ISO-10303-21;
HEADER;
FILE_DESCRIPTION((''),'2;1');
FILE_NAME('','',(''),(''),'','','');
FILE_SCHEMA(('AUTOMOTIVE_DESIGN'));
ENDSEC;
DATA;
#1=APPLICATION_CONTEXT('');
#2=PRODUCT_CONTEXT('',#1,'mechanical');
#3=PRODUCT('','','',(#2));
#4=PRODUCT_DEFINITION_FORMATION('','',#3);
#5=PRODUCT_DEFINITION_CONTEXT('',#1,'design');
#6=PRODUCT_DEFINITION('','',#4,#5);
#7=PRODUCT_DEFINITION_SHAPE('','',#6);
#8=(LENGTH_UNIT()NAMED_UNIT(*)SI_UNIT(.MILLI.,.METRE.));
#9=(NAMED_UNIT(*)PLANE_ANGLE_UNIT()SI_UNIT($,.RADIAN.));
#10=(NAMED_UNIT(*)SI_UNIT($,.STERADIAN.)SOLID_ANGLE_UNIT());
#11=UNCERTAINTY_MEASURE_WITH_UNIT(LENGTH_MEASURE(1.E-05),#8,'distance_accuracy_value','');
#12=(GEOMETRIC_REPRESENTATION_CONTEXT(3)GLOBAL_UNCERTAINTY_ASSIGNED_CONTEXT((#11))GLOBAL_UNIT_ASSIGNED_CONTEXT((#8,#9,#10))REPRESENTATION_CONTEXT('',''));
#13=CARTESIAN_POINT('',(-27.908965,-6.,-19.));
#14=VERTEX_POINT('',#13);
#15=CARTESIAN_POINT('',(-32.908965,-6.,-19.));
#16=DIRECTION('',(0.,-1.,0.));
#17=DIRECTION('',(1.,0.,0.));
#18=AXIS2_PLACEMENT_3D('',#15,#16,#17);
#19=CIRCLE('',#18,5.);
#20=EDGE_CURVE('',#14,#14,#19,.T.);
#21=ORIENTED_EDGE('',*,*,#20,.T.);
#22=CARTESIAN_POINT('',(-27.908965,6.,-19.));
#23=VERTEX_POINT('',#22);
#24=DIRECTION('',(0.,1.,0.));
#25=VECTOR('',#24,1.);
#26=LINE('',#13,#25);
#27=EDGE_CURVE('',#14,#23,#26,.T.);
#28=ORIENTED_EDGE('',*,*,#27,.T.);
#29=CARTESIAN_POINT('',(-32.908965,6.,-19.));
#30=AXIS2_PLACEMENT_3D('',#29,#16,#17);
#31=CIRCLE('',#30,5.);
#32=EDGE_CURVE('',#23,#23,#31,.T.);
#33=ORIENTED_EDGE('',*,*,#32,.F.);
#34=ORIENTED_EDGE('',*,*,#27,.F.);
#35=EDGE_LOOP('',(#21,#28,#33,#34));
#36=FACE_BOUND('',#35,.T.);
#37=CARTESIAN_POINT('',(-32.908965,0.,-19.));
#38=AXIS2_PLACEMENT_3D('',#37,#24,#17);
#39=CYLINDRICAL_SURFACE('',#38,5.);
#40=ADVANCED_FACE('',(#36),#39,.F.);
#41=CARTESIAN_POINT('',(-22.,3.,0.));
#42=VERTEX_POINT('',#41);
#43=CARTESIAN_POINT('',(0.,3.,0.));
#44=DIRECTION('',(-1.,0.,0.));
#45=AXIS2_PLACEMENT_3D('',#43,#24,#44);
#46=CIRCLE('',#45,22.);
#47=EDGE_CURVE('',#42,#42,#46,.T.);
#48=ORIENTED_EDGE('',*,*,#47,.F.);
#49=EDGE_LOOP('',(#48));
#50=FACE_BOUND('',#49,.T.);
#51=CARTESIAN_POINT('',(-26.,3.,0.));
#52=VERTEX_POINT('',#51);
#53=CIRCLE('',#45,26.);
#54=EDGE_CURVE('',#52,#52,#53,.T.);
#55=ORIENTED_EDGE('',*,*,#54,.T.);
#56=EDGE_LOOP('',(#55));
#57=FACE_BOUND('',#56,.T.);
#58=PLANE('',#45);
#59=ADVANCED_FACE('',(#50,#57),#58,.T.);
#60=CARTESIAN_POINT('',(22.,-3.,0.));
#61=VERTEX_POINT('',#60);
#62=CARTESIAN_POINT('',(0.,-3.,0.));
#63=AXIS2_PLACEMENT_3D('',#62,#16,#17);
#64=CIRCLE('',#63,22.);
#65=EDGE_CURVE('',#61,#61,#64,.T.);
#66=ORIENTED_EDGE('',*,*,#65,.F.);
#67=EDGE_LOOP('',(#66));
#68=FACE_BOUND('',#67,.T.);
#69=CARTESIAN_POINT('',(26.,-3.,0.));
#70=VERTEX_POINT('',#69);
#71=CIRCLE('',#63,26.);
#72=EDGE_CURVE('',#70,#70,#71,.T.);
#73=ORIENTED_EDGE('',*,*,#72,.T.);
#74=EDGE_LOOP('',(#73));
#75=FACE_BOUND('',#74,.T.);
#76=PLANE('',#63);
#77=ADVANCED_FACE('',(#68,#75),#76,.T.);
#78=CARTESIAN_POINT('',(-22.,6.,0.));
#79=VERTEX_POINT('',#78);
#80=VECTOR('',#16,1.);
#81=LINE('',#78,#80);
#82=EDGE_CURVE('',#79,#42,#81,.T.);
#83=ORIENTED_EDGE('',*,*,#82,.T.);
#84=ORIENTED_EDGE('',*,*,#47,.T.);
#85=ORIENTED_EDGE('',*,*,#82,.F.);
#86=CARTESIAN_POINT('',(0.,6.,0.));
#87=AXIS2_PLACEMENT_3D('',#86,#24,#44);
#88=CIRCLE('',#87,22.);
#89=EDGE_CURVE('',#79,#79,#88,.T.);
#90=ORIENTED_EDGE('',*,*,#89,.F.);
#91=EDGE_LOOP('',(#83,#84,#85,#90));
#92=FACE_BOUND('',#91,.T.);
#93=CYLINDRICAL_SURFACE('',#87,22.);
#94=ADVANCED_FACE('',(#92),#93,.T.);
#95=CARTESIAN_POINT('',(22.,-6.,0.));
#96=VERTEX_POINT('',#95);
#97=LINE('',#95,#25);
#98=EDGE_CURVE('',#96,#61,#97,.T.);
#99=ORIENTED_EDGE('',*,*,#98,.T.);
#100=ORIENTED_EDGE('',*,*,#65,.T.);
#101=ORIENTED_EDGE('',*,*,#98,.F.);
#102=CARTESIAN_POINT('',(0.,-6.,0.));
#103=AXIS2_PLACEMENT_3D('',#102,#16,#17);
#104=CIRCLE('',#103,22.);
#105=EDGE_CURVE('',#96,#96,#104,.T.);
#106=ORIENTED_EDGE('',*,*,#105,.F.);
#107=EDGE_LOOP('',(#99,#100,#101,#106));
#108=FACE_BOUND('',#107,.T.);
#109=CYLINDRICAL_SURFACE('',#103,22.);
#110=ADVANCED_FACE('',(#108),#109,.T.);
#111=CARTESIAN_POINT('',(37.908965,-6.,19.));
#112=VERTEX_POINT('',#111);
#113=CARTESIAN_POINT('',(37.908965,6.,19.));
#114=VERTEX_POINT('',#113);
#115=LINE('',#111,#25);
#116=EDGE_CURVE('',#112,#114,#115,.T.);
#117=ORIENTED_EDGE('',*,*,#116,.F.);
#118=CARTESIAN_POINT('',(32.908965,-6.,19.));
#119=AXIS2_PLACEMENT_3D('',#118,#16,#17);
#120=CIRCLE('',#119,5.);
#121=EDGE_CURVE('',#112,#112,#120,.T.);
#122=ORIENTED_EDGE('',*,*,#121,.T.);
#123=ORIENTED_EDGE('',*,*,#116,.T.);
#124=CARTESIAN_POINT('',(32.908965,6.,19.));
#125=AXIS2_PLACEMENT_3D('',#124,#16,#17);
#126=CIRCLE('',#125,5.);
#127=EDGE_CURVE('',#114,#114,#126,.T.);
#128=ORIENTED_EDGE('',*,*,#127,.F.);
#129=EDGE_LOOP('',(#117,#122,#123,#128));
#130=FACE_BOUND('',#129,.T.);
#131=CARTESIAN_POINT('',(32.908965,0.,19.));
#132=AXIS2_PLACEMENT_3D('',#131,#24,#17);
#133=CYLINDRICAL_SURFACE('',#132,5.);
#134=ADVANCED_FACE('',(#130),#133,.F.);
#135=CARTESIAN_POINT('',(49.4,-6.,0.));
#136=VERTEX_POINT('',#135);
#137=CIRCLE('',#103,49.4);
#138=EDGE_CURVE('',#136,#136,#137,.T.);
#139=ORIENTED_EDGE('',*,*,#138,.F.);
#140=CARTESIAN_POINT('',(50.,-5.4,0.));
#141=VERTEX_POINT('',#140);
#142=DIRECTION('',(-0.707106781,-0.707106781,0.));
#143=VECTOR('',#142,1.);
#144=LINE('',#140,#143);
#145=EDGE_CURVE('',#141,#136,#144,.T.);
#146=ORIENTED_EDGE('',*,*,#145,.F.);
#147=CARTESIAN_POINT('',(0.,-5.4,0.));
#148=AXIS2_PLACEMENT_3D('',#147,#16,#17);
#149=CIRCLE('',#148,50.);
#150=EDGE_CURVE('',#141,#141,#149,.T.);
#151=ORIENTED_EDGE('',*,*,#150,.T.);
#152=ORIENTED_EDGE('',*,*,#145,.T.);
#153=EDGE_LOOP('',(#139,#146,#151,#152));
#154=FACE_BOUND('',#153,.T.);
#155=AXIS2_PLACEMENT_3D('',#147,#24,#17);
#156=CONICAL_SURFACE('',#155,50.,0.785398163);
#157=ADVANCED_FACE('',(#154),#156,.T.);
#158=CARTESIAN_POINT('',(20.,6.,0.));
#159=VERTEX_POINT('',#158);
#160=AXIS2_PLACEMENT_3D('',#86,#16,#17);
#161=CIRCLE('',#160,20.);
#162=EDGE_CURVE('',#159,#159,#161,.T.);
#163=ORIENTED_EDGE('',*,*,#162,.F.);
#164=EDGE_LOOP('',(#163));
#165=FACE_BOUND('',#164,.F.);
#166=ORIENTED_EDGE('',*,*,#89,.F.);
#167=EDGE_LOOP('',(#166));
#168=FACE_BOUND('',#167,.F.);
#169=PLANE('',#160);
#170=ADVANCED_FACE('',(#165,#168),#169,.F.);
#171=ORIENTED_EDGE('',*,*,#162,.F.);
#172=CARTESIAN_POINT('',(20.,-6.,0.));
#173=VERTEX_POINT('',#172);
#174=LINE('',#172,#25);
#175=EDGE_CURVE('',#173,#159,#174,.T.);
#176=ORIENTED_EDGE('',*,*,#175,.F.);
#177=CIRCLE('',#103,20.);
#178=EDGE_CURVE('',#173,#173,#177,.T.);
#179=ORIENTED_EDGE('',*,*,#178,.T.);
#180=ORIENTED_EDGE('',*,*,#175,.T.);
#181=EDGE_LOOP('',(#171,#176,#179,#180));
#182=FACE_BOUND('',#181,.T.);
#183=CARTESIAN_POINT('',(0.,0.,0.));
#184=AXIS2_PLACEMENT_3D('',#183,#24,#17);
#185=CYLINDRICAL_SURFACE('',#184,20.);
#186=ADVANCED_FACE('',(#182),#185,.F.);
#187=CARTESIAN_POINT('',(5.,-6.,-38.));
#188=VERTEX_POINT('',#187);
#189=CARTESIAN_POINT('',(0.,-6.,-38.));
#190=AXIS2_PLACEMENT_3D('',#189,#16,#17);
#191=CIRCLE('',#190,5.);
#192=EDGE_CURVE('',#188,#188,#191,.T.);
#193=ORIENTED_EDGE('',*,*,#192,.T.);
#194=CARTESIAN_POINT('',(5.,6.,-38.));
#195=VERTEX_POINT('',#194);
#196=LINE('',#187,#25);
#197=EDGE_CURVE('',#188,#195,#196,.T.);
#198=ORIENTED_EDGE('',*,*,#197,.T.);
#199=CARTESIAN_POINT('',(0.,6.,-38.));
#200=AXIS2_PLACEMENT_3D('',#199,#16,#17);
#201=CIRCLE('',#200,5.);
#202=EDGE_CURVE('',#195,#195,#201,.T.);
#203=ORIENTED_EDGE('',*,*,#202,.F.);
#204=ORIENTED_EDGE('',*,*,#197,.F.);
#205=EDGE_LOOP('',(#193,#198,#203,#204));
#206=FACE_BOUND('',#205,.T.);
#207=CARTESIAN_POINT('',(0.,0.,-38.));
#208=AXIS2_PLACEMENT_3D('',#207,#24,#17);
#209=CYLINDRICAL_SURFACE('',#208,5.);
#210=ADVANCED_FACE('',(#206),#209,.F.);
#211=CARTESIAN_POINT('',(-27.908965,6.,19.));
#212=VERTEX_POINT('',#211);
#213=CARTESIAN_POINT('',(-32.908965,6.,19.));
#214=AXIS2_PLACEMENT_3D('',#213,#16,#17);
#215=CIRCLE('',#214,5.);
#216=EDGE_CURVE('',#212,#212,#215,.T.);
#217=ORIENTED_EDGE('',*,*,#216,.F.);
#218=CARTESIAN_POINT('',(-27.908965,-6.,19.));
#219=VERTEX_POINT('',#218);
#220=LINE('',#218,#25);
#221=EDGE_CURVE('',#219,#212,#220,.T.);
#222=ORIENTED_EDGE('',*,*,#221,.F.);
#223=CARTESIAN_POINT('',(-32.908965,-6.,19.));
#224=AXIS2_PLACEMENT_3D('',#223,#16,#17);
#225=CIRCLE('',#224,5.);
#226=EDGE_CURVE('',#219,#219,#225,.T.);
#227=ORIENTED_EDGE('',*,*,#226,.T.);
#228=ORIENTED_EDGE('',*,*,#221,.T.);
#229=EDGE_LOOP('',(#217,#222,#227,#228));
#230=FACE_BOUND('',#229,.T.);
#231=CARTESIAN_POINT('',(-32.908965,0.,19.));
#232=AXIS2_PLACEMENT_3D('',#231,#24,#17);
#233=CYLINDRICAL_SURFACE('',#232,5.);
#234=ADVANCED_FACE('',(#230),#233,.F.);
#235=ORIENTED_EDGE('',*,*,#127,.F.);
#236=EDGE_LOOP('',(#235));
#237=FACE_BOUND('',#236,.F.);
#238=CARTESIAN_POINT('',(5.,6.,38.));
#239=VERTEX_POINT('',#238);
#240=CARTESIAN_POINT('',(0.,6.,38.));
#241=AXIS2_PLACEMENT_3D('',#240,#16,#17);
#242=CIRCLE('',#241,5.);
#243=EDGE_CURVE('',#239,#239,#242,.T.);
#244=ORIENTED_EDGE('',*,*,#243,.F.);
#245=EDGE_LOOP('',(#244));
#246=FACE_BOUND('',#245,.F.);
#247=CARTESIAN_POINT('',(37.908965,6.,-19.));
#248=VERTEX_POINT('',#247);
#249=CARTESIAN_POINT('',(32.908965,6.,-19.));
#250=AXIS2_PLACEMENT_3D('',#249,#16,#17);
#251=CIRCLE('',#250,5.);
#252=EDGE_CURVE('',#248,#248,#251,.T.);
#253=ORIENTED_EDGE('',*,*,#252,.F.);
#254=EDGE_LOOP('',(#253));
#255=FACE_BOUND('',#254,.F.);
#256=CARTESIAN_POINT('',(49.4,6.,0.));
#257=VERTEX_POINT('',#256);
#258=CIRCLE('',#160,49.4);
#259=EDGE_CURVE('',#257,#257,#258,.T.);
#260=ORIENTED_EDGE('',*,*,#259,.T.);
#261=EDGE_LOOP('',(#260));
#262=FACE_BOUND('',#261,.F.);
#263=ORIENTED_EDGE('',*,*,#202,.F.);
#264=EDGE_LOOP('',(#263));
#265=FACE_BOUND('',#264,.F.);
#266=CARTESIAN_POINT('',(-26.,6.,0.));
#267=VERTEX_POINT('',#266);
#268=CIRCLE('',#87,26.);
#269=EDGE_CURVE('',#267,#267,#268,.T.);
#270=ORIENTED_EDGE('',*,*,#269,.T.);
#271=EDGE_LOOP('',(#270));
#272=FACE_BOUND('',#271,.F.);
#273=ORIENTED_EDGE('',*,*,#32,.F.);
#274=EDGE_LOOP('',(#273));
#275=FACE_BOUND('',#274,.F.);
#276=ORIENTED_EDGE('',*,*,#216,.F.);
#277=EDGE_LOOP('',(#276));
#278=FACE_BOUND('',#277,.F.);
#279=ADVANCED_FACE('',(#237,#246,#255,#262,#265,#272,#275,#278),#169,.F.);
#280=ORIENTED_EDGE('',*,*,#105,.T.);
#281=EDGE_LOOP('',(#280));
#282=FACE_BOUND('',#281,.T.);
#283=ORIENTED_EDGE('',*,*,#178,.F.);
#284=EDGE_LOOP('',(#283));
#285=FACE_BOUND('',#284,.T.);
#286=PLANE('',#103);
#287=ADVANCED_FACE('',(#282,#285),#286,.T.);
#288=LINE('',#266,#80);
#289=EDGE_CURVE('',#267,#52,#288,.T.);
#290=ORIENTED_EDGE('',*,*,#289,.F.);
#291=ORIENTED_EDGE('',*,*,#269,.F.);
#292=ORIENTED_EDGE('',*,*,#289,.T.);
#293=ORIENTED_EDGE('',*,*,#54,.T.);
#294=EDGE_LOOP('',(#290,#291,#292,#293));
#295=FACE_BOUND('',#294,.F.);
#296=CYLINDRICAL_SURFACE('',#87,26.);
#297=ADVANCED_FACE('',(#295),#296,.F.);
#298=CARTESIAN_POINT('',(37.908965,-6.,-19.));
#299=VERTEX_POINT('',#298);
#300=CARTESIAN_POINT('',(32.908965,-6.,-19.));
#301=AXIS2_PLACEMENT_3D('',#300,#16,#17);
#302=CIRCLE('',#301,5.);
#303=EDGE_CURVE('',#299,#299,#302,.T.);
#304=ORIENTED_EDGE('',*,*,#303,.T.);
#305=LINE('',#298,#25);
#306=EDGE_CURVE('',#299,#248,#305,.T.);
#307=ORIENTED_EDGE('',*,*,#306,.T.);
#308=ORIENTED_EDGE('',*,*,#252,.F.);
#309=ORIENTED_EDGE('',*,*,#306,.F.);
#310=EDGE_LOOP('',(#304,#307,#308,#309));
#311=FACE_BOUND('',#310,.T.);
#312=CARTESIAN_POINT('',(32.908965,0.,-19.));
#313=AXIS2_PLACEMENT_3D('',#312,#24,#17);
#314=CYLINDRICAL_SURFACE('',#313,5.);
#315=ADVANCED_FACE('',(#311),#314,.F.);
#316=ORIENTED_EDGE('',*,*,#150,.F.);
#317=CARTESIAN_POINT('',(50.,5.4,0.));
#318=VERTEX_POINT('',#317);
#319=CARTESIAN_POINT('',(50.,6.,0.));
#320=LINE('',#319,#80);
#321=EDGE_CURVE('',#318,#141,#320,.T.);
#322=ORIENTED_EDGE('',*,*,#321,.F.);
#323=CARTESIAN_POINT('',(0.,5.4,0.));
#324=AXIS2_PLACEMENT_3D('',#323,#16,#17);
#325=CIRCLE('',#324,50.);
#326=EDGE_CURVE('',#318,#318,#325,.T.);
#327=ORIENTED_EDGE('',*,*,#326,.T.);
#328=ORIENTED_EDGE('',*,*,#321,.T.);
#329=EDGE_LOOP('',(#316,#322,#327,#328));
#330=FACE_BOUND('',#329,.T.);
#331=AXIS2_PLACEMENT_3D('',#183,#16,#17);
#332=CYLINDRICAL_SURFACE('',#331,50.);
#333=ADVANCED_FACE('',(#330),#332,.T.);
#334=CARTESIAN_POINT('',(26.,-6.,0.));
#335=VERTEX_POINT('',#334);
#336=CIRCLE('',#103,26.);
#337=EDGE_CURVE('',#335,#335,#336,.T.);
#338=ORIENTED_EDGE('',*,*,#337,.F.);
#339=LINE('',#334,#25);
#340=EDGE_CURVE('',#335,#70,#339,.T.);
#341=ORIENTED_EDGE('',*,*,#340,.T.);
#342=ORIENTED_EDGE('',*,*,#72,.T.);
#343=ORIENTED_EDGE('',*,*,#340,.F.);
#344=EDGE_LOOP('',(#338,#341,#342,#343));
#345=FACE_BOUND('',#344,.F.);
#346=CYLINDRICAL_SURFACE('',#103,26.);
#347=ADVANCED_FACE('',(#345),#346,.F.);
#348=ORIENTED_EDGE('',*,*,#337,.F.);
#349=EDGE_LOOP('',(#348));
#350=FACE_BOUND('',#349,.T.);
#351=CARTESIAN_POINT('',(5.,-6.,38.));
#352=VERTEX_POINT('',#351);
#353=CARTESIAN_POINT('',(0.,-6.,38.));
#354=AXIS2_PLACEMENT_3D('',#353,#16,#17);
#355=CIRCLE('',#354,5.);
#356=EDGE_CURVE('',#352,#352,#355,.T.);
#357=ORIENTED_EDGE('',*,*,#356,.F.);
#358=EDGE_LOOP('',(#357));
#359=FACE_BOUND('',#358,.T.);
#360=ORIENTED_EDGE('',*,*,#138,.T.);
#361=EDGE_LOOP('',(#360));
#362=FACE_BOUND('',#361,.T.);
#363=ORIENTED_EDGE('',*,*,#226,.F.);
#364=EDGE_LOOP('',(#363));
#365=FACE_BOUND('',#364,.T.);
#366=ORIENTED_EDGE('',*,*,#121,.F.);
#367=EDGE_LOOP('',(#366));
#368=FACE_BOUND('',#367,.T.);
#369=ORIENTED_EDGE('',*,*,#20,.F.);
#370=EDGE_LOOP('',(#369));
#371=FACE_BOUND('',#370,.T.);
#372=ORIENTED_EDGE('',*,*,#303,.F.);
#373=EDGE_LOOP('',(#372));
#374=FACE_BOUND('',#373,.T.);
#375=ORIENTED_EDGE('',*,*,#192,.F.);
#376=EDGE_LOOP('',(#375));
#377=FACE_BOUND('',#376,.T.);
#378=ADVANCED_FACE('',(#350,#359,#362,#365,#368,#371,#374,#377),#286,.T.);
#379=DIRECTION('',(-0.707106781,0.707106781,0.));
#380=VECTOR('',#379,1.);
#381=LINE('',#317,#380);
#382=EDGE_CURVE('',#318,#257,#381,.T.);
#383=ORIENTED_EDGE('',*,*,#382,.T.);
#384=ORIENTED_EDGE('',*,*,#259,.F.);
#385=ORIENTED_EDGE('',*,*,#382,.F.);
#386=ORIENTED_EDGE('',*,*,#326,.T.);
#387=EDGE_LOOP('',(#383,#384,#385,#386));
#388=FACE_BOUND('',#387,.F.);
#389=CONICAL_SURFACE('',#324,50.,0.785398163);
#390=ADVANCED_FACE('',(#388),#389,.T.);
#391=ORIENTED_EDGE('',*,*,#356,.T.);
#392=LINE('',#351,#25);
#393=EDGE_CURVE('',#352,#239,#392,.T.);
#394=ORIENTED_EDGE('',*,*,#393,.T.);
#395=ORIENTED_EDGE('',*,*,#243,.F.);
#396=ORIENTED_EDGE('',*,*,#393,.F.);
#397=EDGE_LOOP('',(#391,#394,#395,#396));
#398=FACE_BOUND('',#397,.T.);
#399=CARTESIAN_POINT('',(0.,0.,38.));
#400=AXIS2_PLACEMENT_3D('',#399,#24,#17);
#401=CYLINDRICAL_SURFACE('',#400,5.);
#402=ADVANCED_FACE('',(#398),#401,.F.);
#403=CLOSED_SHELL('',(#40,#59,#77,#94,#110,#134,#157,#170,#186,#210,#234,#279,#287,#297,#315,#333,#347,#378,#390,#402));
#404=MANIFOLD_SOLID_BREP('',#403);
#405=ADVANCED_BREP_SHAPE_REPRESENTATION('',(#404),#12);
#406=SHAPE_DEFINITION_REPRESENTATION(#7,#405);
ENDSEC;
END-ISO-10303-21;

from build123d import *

# Parameters (mm, degrees)
F0_R     = 50
F0_R_2   = 5
F0_R_3   = 26
F0_R_4   = 22
F0_R_5   = 20
F1_DEPTH = 6
F2_R     = 26
F2_R_2   = 22
F3_DEPTH = 3
F5_R     = 26
F5_R_2   = 22
F6_DEPTH = 3
F7_SIZE  = 0.6


with BuildPart() as f1:
    # F0 (on Front) → F1 (new body, symmetric)
    with BuildSketch(Plane.XZ):
        Circle(F0_R)
        with Locations((-32.9089653438, -19)):
            Circle(F0_R_2, mode=Mode.SUBTRACT)
        with Locations((0, -38)):
            Circle(F0_R_2, mode=Mode.SUBTRACT)
        with Locations((32.9089653438, -19)):
            Circle(F0_R_2, mode=Mode.SUBTRACT)
        with Locations((-32.9089653438, 19)):
            Circle(F0_R_2, mode=Mode.SUBTRACT)
        Circle(F0_R_3, mode=Mode.SUBTRACT)
        with Locations((32.9089653438, 19)):
            Circle(F0_R_2, mode=Mode.SUBTRACT)
        with Locations((0, 38)):
            Circle(F0_R_2, mode=Mode.SUBTRACT)
        Circle(F0_R_3)
        Circle(F0_R_4, mode=Mode.SUBTRACT)
        Circle(F0_R_4)
        Circle(F0_R_5, mode=Mode.SUBTRACT)
    extrude(amount=F1_DEPTH, both=True)

    # F2 (on face) → F3 (cut)
    with BuildSketch(Plane.XZ.offset(6)):
        Circle(F2_R)
        Circle(F2_R_2, mode=Mode.SUBTRACT)
    extrude(amount=-F3_DEPTH, mode=Mode.SUBTRACT)

    # F5 (on face) → F6 (cut)
    with BuildSketch(Plane(origin=(0, 6, 0), x_dir=(-1, 0, 0), z_dir=(0, 1, 0))):
        Circle(F5_R)
        Circle(F5_R_2, mode=Mode.SUBTRACT)
    extrude(amount=-F6_DEPTH, mode=Mode.SUBTRACT)

    # F7
    f7_edges = [f1.edges().sort_by_distance(p)[0] for p in [
        (-50, 6, 0),
        (50, 0, 0),
        (-50, -6, 0),
    ]]
    chamfer(f7_edges, length=F7_SIZE)


solid = f1.part
